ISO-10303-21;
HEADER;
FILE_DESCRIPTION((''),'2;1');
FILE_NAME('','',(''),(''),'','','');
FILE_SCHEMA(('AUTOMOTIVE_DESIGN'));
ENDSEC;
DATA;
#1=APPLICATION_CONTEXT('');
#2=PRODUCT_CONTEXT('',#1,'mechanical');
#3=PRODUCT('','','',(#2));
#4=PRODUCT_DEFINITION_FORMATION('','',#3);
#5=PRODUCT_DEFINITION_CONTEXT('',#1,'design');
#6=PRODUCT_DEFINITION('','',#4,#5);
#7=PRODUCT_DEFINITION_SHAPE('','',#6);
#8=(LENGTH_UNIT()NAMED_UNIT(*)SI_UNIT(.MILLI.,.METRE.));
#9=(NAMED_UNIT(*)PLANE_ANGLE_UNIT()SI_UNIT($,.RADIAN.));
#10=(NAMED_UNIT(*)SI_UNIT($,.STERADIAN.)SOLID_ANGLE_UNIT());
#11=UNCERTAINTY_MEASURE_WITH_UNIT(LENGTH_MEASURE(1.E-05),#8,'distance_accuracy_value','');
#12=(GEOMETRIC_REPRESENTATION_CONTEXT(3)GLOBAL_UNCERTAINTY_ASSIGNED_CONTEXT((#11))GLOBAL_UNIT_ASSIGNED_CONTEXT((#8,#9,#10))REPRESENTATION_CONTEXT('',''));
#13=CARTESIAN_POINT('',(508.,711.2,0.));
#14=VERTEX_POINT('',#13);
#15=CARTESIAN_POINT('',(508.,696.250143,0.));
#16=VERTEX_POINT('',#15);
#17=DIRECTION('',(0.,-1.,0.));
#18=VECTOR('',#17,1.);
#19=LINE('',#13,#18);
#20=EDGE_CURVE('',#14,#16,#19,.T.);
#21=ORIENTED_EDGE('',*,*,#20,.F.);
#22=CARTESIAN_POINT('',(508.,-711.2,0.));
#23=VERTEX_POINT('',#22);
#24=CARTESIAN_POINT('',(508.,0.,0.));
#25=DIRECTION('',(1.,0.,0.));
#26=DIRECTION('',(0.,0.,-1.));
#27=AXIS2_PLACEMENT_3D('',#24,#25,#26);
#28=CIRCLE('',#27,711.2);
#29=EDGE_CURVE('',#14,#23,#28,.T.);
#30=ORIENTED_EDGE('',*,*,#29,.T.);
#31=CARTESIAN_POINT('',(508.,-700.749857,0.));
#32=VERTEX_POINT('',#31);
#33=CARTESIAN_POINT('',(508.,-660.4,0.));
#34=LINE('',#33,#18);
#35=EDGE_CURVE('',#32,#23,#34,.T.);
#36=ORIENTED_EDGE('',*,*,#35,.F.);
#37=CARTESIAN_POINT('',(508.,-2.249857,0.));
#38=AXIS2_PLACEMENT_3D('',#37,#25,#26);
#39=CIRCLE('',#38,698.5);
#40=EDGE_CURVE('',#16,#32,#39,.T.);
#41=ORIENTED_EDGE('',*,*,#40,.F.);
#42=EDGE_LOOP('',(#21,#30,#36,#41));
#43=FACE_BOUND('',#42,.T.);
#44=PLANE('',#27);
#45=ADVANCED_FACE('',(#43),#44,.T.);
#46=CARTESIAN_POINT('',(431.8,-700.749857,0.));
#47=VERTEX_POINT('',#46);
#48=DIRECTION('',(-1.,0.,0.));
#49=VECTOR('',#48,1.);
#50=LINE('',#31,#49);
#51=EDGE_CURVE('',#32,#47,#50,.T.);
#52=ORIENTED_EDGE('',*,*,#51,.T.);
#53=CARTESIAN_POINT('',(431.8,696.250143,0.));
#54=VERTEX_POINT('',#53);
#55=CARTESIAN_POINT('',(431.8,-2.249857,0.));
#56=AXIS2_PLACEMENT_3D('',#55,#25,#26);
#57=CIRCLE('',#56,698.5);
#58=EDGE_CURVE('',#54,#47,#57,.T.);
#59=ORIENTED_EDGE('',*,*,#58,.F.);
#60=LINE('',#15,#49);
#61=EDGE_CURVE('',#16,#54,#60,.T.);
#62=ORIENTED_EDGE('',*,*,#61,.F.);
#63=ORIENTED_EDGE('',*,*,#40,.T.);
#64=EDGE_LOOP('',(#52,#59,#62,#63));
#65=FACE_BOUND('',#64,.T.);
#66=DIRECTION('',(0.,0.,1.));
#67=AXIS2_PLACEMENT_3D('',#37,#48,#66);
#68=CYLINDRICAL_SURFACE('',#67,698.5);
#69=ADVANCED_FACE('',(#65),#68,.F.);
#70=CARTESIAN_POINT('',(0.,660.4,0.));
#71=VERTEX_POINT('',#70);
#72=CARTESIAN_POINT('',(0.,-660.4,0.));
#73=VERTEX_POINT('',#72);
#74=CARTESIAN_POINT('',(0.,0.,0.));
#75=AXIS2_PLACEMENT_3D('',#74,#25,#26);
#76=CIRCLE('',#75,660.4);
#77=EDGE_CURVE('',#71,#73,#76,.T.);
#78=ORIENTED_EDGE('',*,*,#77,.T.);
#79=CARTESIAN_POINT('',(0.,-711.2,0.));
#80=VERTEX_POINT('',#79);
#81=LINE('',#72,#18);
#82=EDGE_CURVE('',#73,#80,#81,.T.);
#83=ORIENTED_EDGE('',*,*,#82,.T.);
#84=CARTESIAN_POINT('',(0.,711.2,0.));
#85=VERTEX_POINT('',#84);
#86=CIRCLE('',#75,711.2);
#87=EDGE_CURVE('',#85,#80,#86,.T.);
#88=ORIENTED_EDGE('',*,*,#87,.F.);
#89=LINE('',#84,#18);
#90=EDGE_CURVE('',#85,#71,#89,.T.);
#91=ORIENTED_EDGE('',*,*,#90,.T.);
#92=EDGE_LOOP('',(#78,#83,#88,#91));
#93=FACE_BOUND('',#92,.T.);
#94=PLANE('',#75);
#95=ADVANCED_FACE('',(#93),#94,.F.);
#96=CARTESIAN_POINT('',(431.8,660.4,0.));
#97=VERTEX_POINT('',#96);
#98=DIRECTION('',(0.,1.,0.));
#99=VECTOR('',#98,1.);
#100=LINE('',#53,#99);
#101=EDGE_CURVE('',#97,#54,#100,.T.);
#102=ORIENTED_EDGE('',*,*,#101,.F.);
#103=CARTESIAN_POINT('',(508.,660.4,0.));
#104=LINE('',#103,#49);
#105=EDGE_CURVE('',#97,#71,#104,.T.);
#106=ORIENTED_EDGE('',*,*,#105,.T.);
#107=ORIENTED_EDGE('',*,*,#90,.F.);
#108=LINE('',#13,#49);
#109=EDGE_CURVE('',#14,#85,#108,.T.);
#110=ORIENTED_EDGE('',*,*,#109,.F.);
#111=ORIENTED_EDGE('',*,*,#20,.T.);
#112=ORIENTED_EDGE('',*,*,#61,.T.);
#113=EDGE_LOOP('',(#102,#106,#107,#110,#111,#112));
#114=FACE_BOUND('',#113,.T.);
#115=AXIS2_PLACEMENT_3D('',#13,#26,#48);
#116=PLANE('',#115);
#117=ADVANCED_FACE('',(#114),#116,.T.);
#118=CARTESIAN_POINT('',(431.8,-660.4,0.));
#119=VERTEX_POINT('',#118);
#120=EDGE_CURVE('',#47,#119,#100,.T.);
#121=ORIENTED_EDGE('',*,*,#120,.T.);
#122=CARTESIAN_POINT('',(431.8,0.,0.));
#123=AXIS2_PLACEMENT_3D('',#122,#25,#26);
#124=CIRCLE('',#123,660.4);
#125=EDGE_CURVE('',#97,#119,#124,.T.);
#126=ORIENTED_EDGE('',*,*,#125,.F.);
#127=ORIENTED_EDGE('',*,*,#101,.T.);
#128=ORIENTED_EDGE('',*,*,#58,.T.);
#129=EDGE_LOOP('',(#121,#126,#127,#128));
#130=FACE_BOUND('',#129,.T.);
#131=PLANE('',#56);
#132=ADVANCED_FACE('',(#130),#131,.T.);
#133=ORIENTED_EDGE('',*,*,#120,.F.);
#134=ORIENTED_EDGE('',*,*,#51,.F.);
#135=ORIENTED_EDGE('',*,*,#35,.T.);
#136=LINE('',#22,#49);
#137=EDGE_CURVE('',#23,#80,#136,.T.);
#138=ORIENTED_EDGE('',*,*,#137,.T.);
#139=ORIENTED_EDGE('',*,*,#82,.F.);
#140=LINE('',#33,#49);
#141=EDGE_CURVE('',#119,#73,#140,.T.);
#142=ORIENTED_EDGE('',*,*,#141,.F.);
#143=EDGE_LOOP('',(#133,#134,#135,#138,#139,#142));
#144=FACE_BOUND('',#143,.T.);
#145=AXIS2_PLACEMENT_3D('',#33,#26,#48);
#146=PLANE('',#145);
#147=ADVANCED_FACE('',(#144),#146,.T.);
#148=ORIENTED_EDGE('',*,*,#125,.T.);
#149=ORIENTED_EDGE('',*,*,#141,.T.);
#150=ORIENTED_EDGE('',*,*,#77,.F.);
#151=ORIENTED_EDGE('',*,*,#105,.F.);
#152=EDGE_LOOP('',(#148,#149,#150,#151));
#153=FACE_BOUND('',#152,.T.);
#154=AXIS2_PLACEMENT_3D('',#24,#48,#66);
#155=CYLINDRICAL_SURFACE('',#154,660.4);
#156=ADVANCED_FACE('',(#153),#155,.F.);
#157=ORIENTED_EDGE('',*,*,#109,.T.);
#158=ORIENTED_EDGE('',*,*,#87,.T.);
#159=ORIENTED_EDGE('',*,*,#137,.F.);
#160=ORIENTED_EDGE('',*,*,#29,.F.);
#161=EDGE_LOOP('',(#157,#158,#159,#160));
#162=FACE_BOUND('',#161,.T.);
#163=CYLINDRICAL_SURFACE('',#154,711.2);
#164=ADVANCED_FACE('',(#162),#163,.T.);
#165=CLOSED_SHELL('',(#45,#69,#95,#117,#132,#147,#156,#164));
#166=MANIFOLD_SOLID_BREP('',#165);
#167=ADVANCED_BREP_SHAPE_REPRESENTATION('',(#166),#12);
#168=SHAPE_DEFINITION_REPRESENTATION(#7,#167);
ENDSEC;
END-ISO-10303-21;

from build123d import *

# Parameters (mm, degrees)
BOSS_EXTRUDE1_DEPTH = 508
CAVITY1_START       = 431.8
CAVITY1_DEPTH       = 76.2


# Read off the part's stored shape, not the designer's step: Cavity1
with BuildPart() as part:
    # Sketch1 → Boss-Extrude1 (new body)
    with BuildSketch(Plane(origin=(0, 0, 0), x_dir=(0, 0, -1), z_dir=(1, 0, 0))):
        with BuildLine():
            Line((0, 711.2), (0, 660.4))
            ThreePointArc((0, 660.4), (-660.4, 0), (0, -660.4))
            Line((0, -660.4), (0, -711.2))
            ThreePointArc((0, -711.2), (-711.2, 0), (0, 711.2))
        make_face()
    extrude(amount=BOSS_EXTRUDE1_DEPTH)

    # Cavity1 outline → Cavity1 (cut)
    with BuildSketch(Plane.YZ.offset(CAVITY1_START)):
        with BuildLine():
            ThreePointArc((696.250142702, 0), (-2.249857298, 698.5), (-700.749857298, 0))
            Line((-700.749857298, 0), (-660.4, 0))
            ThreePointArc((-660.4, 0), (0, 660.4), (660.4, 0))
            Line((660.4, 0), (696.250142702, 0))
        make_face()
    extrude(amount=CAVITY1_DEPTH, mode=Mode.SUBTRACT)


solid = part.part
